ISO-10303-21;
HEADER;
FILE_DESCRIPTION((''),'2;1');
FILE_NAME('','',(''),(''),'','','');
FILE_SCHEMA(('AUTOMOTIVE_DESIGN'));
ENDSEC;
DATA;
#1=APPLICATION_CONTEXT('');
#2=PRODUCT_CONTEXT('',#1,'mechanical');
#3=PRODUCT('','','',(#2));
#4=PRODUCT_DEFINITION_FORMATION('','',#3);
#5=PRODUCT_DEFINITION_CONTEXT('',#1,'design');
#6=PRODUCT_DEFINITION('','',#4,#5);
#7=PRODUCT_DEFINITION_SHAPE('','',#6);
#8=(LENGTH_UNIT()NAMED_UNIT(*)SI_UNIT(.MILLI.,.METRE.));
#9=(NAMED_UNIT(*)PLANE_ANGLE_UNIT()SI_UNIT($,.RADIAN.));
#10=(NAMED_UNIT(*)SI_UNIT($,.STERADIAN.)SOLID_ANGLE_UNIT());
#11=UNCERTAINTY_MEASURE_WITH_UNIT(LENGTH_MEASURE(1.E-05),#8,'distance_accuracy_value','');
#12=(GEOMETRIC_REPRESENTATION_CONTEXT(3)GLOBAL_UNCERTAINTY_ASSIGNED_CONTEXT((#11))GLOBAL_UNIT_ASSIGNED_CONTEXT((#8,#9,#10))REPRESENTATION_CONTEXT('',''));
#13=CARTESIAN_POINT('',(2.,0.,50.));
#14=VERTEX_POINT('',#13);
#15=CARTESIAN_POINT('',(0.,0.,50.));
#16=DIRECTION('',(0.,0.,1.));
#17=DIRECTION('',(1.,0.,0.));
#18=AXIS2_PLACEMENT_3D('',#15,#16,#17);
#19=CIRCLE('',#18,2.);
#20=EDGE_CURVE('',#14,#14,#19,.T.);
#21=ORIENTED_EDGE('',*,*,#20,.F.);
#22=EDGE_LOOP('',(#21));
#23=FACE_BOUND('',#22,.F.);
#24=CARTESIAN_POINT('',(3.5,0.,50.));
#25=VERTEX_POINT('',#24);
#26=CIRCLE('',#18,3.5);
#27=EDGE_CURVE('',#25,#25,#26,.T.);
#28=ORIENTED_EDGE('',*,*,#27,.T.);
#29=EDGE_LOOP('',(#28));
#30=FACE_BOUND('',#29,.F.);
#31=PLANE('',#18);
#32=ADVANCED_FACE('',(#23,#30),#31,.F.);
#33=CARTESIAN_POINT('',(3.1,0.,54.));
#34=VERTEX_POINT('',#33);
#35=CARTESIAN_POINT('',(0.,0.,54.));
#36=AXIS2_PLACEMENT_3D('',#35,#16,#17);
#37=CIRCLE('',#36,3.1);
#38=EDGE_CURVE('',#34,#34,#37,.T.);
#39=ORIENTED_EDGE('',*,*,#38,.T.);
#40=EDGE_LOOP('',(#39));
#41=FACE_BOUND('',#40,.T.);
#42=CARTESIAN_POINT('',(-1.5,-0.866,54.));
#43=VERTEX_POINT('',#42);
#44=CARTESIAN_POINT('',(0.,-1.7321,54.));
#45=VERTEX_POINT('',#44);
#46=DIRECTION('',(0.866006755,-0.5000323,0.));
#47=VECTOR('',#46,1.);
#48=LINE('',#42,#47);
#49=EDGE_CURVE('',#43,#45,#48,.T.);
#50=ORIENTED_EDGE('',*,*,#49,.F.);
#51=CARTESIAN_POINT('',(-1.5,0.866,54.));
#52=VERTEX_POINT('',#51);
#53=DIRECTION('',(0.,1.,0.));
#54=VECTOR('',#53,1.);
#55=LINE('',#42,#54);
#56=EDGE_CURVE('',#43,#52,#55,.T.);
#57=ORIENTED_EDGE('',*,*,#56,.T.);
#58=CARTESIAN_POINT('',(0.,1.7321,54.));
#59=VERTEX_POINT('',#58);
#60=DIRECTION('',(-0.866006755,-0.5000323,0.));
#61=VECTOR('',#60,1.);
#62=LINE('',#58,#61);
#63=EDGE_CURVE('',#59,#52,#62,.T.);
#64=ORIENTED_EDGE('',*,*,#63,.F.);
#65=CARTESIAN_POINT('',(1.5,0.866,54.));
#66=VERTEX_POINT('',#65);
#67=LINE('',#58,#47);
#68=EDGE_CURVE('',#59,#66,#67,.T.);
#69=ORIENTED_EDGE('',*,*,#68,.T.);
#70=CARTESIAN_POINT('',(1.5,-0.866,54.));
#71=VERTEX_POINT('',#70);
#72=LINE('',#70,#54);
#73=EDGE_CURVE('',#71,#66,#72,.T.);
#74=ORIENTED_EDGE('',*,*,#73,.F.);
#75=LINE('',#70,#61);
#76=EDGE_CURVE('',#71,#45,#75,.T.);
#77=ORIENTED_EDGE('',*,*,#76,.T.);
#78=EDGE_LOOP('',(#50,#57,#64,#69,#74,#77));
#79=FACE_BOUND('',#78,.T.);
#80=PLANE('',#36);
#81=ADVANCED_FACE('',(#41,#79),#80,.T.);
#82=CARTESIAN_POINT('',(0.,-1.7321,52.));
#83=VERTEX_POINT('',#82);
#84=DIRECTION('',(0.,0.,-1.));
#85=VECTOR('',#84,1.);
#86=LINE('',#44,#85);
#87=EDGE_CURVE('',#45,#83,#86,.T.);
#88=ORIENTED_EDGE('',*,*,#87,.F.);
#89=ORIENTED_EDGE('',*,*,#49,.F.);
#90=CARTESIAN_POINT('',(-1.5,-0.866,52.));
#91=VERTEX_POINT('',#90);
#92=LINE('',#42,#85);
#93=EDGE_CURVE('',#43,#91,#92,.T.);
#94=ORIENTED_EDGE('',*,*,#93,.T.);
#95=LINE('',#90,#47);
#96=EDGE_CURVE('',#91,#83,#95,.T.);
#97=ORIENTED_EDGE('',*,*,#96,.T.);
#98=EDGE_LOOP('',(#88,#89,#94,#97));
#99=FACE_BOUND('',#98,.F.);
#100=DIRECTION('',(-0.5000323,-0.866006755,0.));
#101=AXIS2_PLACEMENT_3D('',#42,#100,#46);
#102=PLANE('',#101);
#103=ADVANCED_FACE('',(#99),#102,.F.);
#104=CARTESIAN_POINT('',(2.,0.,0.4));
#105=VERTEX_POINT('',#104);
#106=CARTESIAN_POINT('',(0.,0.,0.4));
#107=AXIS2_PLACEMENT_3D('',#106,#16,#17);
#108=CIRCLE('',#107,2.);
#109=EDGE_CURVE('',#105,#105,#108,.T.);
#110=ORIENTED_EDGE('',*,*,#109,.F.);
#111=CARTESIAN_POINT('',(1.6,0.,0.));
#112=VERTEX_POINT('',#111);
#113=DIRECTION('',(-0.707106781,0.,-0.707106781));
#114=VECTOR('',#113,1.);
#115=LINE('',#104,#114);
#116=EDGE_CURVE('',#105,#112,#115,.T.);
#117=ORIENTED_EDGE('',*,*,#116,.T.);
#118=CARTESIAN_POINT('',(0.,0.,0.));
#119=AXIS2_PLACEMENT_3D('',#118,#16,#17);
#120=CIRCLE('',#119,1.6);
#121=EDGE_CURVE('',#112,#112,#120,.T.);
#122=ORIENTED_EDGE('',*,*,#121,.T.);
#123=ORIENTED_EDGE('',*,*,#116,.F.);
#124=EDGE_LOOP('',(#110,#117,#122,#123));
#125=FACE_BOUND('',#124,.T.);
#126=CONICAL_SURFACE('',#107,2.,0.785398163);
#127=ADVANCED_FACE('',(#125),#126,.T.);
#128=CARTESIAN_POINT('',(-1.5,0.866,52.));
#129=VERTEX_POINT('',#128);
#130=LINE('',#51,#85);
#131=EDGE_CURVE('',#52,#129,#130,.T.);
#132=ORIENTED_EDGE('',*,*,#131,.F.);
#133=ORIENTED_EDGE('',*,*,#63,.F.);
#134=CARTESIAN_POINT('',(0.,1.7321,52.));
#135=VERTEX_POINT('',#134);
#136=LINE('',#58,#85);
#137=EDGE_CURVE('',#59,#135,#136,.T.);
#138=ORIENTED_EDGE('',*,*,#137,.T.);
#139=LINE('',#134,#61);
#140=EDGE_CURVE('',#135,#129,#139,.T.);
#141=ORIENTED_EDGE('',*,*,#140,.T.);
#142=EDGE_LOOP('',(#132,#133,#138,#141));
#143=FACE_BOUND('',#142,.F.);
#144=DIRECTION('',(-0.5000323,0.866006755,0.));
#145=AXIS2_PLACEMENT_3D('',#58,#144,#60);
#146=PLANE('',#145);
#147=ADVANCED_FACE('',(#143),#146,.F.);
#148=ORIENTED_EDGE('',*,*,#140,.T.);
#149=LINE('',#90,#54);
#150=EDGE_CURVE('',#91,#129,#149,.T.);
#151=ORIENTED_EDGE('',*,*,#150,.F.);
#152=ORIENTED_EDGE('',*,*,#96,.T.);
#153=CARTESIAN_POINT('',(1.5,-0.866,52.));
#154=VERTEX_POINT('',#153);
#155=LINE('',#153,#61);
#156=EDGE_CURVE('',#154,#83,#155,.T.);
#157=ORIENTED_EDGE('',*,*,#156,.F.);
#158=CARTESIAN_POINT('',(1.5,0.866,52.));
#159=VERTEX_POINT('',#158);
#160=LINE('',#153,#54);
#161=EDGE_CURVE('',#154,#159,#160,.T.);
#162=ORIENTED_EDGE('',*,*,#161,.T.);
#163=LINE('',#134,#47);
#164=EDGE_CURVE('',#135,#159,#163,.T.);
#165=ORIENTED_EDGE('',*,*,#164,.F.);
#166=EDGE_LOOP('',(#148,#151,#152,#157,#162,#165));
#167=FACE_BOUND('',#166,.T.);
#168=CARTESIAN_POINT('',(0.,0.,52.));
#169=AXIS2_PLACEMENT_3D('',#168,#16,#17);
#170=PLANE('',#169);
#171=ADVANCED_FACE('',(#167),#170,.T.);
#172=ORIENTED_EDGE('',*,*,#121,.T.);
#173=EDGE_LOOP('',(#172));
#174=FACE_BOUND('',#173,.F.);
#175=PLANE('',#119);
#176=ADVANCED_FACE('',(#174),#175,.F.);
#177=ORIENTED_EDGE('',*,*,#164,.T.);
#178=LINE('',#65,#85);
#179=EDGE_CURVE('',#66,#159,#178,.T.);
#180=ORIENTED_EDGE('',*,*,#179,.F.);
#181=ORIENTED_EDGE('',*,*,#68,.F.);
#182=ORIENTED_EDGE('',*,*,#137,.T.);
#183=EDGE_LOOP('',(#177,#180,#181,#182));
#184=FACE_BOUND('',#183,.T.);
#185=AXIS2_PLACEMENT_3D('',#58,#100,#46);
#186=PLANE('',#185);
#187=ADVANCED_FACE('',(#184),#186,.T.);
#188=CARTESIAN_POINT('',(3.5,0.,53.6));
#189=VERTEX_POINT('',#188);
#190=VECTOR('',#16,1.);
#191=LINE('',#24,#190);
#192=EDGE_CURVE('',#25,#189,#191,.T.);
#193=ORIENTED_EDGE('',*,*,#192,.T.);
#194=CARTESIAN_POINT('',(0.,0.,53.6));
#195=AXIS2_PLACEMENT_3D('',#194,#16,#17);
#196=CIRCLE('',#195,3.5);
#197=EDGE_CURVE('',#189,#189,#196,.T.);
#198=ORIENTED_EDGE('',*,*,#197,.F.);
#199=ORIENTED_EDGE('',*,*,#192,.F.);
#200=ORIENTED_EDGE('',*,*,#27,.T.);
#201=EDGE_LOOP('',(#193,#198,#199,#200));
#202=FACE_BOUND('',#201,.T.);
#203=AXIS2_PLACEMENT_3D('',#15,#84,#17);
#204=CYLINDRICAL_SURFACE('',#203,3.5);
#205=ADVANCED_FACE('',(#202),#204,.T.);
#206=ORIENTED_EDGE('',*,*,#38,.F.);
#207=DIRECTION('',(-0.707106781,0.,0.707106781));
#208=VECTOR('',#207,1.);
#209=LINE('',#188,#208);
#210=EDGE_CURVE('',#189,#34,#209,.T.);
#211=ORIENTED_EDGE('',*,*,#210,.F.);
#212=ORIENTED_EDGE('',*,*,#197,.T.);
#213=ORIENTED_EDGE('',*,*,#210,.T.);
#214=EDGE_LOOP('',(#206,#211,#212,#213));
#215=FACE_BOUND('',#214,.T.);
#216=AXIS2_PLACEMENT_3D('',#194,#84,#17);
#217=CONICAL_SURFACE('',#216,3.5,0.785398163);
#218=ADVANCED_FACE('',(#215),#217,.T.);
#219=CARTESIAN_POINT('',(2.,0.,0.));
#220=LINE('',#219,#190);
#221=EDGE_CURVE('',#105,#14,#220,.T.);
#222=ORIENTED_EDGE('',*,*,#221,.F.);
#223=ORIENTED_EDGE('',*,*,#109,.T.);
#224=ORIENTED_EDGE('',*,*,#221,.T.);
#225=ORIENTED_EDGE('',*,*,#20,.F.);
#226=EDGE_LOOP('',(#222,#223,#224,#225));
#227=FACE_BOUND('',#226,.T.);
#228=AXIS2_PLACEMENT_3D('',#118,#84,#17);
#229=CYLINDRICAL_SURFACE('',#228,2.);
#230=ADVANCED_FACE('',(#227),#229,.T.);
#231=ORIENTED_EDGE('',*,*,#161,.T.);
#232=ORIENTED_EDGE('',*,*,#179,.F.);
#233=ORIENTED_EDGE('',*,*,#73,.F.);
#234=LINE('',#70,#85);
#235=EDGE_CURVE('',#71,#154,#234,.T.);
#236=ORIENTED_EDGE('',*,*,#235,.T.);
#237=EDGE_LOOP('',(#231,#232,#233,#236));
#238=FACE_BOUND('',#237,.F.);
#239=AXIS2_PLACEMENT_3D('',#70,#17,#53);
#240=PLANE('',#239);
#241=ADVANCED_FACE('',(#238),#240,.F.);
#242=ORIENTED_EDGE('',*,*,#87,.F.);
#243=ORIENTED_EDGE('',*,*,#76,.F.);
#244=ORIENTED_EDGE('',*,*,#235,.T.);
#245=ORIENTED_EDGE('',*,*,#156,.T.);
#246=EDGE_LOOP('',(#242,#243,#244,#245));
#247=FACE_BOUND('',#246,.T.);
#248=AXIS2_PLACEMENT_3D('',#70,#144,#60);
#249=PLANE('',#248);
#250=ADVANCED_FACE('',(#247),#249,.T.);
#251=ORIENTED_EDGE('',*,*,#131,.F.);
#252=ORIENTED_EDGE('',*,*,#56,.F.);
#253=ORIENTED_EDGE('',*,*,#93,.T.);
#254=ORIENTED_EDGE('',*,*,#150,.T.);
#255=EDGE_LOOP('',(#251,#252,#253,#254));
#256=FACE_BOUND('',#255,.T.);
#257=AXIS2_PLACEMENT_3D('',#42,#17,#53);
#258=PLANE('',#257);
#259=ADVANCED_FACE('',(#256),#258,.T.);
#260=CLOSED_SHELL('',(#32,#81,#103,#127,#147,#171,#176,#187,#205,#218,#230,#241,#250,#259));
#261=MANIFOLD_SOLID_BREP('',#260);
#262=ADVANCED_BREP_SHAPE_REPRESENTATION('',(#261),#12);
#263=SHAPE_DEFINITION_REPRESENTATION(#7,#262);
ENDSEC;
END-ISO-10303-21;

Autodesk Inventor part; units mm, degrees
ref_plane "YZ Plane" through (0, 0, 0) normal (1, 0, 0) x (0, 1, 0)
ref_plane "XZ Plane" through (0, 0, 0) normal (0, 1, 0) x (-1, 0, 0)
ref_plane "XY Plane" through (0, 0, 0) normal (0, 0, 1) x (1, 0, 0)
sketch "Sketch1" plane through (0, 0, 0) normal (0, 0, 1) x (1, 0, 0)
  circle A0 centre (0, 0) radius 2
  dimension "Diameter" = 4
extrude "Extrusion1" add sketch "Sketch1" along normal blind 50
sketch "Sketch2" plane through (0, 0, 50) normal (0, 0, 1) x (1, 0, 0)
  circle A0 centre (0, 0) radius 2 projected
  circle A1 centre (0, 0) radius 3.5
  dimension "Head_Diameter" = 7
extrude "Extrusion2" add sketch "Sketch2" along normal blind 4 contours A0 | A1
sketch "Sketch3" plane through (0, 0, 54) normal (0, 0, 1) x (1, 0, 0)
  circle A0 centre (0, 0) radius 3.5 projected
  circle A1 centre (0, 0) radius 1.7321 construction
  line L0 (0, 1.7321) -> (1.5, 0.866)
  line L1 (1.5, -0.866) -> (1.5, 0.866)
  line L2 (0, 1.7321) -> (-1.5, 0.866)
  line L3 (-1.5, -0.866) -> (-1.5, 0.866)
  line L4 (-1.5, -0.866) -> (0, -1.7321)
  line L5 (1.5, -0.866) -> (0, -1.7321)
  dimension "Hex_Width" = 3
extrude "Extrusion3" cut sketch "Sketch3" against normal blind 2 contours L0 L1 L5 L4 L3 L2
thread "Thread1" size "M4x0.7" class "4g6g" standard "ANSI Metric M Profile" length 20
chamfer "Chamfer1" distance 0.4 angle 45 2 edges at (-3.5, 0, 54) (-2, 0, 0)
equation "\"d9\" = ThreadLength"
equation "\"d12\" = Chamfer"
equation "\"ThreadLength\" = 20"
equation "\"Chamfer\" = 0.4"
properties part number "SCREW, SOCKET HD, P, 12_9, M4X0_7X50" material "Steel, MS"
